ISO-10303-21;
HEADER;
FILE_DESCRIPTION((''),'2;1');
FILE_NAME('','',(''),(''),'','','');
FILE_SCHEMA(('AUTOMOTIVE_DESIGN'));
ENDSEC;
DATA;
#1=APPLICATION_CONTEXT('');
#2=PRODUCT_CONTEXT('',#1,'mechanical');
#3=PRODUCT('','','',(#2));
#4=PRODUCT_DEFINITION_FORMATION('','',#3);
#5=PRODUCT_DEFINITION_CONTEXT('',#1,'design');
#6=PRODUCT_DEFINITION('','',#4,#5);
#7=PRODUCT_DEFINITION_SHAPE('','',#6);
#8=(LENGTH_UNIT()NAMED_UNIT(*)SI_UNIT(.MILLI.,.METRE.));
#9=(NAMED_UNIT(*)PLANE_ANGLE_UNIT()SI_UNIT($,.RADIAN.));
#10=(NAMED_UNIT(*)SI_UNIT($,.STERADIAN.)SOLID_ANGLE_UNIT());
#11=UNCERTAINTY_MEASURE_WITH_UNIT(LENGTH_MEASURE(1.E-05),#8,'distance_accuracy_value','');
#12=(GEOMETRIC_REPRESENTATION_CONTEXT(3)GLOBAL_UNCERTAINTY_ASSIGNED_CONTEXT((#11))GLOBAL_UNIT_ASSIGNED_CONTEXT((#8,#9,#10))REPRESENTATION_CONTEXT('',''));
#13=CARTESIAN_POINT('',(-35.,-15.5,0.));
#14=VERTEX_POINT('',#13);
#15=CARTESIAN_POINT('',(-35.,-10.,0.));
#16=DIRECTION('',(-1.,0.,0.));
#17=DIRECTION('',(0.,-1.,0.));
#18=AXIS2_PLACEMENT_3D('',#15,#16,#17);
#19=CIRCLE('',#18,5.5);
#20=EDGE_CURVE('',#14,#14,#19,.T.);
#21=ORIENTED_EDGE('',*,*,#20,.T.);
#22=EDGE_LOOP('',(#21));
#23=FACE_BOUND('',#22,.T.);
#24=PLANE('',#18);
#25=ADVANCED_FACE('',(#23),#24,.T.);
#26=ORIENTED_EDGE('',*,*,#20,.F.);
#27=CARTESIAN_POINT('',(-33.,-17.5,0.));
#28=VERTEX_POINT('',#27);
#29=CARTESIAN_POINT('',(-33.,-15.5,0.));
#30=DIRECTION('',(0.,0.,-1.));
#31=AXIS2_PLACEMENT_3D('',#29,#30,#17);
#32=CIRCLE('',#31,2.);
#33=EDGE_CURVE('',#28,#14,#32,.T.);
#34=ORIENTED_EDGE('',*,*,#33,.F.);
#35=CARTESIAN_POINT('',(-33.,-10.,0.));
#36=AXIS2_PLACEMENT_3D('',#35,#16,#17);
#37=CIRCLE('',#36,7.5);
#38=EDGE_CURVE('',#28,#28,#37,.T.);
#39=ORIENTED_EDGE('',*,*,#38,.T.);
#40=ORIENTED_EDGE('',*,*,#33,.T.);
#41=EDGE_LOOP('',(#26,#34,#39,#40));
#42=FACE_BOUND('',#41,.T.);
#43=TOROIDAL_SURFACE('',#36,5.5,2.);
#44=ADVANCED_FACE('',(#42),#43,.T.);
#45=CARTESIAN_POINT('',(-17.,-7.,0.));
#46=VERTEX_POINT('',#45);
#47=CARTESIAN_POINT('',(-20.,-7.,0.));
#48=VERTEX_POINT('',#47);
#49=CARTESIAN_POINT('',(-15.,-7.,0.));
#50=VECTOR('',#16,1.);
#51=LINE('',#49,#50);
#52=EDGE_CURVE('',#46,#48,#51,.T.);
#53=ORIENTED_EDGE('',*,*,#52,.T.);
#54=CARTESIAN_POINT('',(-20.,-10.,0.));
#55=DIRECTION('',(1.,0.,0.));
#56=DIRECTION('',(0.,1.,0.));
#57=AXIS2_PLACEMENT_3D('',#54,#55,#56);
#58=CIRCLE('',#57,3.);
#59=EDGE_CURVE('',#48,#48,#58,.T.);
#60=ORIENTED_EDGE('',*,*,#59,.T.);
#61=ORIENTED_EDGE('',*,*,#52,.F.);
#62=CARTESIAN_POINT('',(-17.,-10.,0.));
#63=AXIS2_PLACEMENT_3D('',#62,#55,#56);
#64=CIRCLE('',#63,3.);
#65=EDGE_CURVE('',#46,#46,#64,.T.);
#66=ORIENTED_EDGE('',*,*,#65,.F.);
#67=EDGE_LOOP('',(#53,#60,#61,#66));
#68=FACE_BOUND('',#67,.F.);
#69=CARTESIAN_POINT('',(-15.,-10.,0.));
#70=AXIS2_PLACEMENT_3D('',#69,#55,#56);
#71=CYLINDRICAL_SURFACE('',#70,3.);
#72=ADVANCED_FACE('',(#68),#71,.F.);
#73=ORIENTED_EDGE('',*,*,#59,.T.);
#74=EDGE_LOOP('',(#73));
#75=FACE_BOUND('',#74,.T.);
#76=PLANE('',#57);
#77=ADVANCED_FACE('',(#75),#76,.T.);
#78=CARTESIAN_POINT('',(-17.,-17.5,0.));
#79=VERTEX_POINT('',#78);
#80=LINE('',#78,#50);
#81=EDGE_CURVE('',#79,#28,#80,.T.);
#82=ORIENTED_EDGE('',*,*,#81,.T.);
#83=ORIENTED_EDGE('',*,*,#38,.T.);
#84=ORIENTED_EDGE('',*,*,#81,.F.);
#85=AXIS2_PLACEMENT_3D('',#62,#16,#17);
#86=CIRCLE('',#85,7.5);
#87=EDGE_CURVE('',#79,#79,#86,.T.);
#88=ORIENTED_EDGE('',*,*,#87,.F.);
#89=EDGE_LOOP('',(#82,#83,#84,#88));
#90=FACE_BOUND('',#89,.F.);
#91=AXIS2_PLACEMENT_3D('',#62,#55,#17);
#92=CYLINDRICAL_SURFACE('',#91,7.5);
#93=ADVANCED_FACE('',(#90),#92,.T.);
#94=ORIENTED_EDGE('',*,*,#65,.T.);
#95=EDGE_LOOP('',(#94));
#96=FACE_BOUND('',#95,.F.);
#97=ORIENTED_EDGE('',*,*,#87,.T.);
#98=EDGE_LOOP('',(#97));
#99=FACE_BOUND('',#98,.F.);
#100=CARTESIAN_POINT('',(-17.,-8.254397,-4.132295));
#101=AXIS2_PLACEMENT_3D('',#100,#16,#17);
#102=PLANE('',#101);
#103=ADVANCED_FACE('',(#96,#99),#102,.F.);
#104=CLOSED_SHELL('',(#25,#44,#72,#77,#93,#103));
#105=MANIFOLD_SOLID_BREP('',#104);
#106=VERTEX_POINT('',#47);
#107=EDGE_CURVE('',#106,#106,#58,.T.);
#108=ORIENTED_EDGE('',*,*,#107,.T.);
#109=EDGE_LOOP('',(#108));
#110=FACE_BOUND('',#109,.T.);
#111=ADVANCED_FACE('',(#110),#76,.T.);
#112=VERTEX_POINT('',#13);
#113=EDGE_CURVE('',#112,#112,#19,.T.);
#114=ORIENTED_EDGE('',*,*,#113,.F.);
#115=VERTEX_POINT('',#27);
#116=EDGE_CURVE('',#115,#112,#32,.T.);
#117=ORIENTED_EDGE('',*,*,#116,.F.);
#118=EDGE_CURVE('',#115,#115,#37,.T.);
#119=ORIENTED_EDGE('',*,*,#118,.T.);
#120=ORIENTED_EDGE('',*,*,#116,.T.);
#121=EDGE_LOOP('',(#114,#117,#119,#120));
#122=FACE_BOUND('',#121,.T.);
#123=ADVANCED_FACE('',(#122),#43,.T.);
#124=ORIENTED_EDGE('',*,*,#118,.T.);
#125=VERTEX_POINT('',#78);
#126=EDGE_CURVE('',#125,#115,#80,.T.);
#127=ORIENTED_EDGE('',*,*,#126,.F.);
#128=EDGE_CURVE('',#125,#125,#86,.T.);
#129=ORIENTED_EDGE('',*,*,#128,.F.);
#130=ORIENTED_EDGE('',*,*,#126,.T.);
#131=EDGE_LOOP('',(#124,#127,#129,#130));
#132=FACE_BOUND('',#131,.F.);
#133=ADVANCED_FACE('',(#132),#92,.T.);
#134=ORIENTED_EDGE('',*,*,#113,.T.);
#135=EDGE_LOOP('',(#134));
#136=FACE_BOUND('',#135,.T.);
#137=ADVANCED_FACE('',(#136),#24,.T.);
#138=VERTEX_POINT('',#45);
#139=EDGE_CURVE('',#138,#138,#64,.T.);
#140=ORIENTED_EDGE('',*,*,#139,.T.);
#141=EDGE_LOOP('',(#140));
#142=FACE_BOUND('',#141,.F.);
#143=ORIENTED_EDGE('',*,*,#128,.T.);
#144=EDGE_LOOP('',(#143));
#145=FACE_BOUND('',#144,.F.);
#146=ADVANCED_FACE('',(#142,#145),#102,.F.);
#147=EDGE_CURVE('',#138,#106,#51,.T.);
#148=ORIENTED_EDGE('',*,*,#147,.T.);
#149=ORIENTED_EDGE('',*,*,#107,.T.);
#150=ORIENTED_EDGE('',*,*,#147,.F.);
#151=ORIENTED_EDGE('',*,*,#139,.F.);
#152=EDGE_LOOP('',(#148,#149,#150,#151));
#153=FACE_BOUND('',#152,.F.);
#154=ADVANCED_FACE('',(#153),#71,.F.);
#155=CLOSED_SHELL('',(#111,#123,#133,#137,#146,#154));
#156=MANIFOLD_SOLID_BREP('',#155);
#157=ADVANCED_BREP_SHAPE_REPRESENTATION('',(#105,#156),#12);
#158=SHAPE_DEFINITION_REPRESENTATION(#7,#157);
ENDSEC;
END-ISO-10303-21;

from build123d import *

# Parameters (mm, degrees)
F0_W      = 34
F0_H      = 24
F0_W_2    = 30
F0_H_2    = 20
F1_DEPTH  = 20
F2_R      = 6.5
F3_DEPTH  = 11.7
F4_R      = 7.5
F5_DEPTH  = 8.3
F6_R      = 7.5
F7_DEPTH  = 18
F8_R      = 2
F9_R      = 0.99999
F10_W     = 2
F10_H     = 20
F11_DEPTH = 25
F13_DEPTH = 15
F14_R     = 0.99999
F16_R     = 3
F17_DEPTH = 5
F18_W     = 40.3561908752
F18_H     = 35.6408245862
F20_DEPTH = 56.6
F21_DEPTH = 74.7


# Not quite as in the source:
# - a fillet or chamfer is up to 0.001 mm smaller than in the source, because OpenCascade refuses the exact size
# - a feature of the source that left no trace in its solid (it failed there, or was rolled back) is left out


with BuildPart() as f1:
    # F0 (on Front) → F1 (new body)
    with BuildSketch(Plane.XZ):
        Rectangle(F0_W, F0_H)
        Rectangle(F0_W_2, F0_H_2, mode=Mode.SUBTRACT)
    extrude(amount=F1_DEPTH)

    # F2 (on face) → F3 (cut)
    with BuildSketch(Plane.XY.offset(12)):
        with Locations((6, -10)):
            Circle(F2_R)
    extrude(amount=-F3_DEPTH, mode=Mode.SUBTRACT)

    # F4 (on face) → F5 (cut)
    with BuildSketch(Plane(origin=(0, 0, -12), x_dir=(1, 0, 0), z_dir=(0, 0, -1))):
        with Locations((-5, 10)):
            Circle(F4_R)
    extrude(amount=-F5_DEPTH, mode=Mode.SUBTRACT)

    # F6 (on face) → F7 (join)
    with BuildSketch(Plane(origin=(-17, 0, 0), x_dir=(0, -1, 0), z_dir=(-1, 0, 0))):
        with Locations((10, 0)):
            Circle(F6_R)
    extrude(amount=F7_DEPTH)

    # F8
    f8_edges = [f1.edges().sort_by_distance(p)[0] for p in [
        (-17, -10, 12),
        (-17, -10, -12),
        (-35, -2.5, 0),
    ]]
    fillet(f8_edges, radius=F8_R)

    # F9 (radius 1 in the source; OpenCascade refuses exactly that, so slightly less here)
    f9_edges = [f1.edges().sort_by_distance(p)[0] for p in [
        (-0.5, -10, 10),
        (-0.5, -10, 12),
        (-12.5, -10, -10),
        (-12.5, -10, -12),
    ]]
    fillet(f9_edges, radius=F9_R)

    # F10 (on face) → F11 (cut)
    with BuildSketch(Plane.XZ.offset(20)):
        with Locations((16, 0)):
            Rectangle(F10_W, F10_H)
    extrude(amount=-F11_DEPTH, mode=Mode.SUBTRACT)

    # F12 (on Right) → F13 (join, symmetric)
    with BuildSketch(Plane.YZ):
        with BuildLine():
            Line((-20, 10), (-20, 12))
            ThreePointArc((-20, 12), (-21, 11), (-20, 10))
        make_face()
        with BuildLine():
            Line((-19, 10), (-20, 10))
            ThreePointArc((-20, 10), (-19.5, 9.5), (-19, 10))
        make_face()
        with BuildLine():
            Line((-20, -12), (-20, -10))
            ThreePointArc((-20, -10), (-21, -11), (-20, -12))
        make_face()
        with BuildLine():
            Line((-19, -12), (-20, -12))
            ThreePointArc((-20, -12), (-19.5, -12.5), (-19, -12))
        make_face()
        with BuildLine():
            Line((0, -10), (0, -12))
            ThreePointArc((0, -12), (1, -11), (0, -10))
        make_face()
        with BuildLine():
            ThreePointArc((-1, -12), (-0.5, -12.5), (0, -12))
            Line((0, -12), (-1, -12))
        make_face()
        with BuildLine():
            Line((0, 12), (0, 10))
            ThreePointArc((0, 10), (1, 11), (0, 12))
        make_face()
        with BuildLine():
            ThreePointArc((-1, 10), (-0.5, 9.5), (0, 10))
            Line((0, 10), (-1, 10))
        make_face()
    extrude(amount=F13_DEPTH, both=True)

    # F14 (radius 1 in the source; OpenCascade refuses exactly that, so slightly less here)
    f14_edges = [f1.edges().sort_by_distance(p)[0] for p in [
        (15, -21, 11),
        (-15, -21, 11),
        (-15, -21, -11),
        (15, -21, -11),
        (-15, 1, 11),
        (-15, 1, -11),
        (15, 1, -11),
        (15, 1, 11),
    ]]
    fillet(f14_edges, radius=F14_R)

    # F16 (on face) → F17 (cut)
    with BuildSketch(Plane.YZ.offset(-15)):
        with Locations((-10, 0)):
            Circle(F16_R)
    extrude(amount=-F17_DEPTH, mode=Mode.SUBTRACT)


with BuildPart() as f19_1:
    # F19: copy of F1
    add(f1.part)


with BuildPart() as f20_tool:
    # F18 (on face) → F20 (new body)
    with BuildSketch(Plane(origin=(-17, 0, 0), x_dir=(0, -1, 0), z_dir=(-1, 0, 0))):
        with Locations((8.2543967292, -4.1322950274)):
            Rectangle(F18_W, F18_H)
    extrude(amount=-F20_DEPTH)


with BuildPart() as f1_1:
    add(f1.part)

    # F20: cut by f20_tool
    add(f20_tool.part, mode=Mode.SUBTRACT)

    # F18 (on face) → F21 (cut)
    with BuildSketch(Plane(origin=(-17, 0, 0), x_dir=(0, -1, 0), z_dir=(-1, 0, 0))):
        with Locations((8.2543967292, -4.1322950274)):
            Rectangle(F18_W, F18_H)
    extrude(amount=-F21_DEPTH, mode=Mode.SUBTRACT)


with BuildPart() as f19_1_1:
    add(f19_1.part)

    # F20: cut by f20_tool
    add(f20_tool.part, mode=Mode.SUBTRACT)


solid = Compound([f1_1.part, f19_1_1.part])
